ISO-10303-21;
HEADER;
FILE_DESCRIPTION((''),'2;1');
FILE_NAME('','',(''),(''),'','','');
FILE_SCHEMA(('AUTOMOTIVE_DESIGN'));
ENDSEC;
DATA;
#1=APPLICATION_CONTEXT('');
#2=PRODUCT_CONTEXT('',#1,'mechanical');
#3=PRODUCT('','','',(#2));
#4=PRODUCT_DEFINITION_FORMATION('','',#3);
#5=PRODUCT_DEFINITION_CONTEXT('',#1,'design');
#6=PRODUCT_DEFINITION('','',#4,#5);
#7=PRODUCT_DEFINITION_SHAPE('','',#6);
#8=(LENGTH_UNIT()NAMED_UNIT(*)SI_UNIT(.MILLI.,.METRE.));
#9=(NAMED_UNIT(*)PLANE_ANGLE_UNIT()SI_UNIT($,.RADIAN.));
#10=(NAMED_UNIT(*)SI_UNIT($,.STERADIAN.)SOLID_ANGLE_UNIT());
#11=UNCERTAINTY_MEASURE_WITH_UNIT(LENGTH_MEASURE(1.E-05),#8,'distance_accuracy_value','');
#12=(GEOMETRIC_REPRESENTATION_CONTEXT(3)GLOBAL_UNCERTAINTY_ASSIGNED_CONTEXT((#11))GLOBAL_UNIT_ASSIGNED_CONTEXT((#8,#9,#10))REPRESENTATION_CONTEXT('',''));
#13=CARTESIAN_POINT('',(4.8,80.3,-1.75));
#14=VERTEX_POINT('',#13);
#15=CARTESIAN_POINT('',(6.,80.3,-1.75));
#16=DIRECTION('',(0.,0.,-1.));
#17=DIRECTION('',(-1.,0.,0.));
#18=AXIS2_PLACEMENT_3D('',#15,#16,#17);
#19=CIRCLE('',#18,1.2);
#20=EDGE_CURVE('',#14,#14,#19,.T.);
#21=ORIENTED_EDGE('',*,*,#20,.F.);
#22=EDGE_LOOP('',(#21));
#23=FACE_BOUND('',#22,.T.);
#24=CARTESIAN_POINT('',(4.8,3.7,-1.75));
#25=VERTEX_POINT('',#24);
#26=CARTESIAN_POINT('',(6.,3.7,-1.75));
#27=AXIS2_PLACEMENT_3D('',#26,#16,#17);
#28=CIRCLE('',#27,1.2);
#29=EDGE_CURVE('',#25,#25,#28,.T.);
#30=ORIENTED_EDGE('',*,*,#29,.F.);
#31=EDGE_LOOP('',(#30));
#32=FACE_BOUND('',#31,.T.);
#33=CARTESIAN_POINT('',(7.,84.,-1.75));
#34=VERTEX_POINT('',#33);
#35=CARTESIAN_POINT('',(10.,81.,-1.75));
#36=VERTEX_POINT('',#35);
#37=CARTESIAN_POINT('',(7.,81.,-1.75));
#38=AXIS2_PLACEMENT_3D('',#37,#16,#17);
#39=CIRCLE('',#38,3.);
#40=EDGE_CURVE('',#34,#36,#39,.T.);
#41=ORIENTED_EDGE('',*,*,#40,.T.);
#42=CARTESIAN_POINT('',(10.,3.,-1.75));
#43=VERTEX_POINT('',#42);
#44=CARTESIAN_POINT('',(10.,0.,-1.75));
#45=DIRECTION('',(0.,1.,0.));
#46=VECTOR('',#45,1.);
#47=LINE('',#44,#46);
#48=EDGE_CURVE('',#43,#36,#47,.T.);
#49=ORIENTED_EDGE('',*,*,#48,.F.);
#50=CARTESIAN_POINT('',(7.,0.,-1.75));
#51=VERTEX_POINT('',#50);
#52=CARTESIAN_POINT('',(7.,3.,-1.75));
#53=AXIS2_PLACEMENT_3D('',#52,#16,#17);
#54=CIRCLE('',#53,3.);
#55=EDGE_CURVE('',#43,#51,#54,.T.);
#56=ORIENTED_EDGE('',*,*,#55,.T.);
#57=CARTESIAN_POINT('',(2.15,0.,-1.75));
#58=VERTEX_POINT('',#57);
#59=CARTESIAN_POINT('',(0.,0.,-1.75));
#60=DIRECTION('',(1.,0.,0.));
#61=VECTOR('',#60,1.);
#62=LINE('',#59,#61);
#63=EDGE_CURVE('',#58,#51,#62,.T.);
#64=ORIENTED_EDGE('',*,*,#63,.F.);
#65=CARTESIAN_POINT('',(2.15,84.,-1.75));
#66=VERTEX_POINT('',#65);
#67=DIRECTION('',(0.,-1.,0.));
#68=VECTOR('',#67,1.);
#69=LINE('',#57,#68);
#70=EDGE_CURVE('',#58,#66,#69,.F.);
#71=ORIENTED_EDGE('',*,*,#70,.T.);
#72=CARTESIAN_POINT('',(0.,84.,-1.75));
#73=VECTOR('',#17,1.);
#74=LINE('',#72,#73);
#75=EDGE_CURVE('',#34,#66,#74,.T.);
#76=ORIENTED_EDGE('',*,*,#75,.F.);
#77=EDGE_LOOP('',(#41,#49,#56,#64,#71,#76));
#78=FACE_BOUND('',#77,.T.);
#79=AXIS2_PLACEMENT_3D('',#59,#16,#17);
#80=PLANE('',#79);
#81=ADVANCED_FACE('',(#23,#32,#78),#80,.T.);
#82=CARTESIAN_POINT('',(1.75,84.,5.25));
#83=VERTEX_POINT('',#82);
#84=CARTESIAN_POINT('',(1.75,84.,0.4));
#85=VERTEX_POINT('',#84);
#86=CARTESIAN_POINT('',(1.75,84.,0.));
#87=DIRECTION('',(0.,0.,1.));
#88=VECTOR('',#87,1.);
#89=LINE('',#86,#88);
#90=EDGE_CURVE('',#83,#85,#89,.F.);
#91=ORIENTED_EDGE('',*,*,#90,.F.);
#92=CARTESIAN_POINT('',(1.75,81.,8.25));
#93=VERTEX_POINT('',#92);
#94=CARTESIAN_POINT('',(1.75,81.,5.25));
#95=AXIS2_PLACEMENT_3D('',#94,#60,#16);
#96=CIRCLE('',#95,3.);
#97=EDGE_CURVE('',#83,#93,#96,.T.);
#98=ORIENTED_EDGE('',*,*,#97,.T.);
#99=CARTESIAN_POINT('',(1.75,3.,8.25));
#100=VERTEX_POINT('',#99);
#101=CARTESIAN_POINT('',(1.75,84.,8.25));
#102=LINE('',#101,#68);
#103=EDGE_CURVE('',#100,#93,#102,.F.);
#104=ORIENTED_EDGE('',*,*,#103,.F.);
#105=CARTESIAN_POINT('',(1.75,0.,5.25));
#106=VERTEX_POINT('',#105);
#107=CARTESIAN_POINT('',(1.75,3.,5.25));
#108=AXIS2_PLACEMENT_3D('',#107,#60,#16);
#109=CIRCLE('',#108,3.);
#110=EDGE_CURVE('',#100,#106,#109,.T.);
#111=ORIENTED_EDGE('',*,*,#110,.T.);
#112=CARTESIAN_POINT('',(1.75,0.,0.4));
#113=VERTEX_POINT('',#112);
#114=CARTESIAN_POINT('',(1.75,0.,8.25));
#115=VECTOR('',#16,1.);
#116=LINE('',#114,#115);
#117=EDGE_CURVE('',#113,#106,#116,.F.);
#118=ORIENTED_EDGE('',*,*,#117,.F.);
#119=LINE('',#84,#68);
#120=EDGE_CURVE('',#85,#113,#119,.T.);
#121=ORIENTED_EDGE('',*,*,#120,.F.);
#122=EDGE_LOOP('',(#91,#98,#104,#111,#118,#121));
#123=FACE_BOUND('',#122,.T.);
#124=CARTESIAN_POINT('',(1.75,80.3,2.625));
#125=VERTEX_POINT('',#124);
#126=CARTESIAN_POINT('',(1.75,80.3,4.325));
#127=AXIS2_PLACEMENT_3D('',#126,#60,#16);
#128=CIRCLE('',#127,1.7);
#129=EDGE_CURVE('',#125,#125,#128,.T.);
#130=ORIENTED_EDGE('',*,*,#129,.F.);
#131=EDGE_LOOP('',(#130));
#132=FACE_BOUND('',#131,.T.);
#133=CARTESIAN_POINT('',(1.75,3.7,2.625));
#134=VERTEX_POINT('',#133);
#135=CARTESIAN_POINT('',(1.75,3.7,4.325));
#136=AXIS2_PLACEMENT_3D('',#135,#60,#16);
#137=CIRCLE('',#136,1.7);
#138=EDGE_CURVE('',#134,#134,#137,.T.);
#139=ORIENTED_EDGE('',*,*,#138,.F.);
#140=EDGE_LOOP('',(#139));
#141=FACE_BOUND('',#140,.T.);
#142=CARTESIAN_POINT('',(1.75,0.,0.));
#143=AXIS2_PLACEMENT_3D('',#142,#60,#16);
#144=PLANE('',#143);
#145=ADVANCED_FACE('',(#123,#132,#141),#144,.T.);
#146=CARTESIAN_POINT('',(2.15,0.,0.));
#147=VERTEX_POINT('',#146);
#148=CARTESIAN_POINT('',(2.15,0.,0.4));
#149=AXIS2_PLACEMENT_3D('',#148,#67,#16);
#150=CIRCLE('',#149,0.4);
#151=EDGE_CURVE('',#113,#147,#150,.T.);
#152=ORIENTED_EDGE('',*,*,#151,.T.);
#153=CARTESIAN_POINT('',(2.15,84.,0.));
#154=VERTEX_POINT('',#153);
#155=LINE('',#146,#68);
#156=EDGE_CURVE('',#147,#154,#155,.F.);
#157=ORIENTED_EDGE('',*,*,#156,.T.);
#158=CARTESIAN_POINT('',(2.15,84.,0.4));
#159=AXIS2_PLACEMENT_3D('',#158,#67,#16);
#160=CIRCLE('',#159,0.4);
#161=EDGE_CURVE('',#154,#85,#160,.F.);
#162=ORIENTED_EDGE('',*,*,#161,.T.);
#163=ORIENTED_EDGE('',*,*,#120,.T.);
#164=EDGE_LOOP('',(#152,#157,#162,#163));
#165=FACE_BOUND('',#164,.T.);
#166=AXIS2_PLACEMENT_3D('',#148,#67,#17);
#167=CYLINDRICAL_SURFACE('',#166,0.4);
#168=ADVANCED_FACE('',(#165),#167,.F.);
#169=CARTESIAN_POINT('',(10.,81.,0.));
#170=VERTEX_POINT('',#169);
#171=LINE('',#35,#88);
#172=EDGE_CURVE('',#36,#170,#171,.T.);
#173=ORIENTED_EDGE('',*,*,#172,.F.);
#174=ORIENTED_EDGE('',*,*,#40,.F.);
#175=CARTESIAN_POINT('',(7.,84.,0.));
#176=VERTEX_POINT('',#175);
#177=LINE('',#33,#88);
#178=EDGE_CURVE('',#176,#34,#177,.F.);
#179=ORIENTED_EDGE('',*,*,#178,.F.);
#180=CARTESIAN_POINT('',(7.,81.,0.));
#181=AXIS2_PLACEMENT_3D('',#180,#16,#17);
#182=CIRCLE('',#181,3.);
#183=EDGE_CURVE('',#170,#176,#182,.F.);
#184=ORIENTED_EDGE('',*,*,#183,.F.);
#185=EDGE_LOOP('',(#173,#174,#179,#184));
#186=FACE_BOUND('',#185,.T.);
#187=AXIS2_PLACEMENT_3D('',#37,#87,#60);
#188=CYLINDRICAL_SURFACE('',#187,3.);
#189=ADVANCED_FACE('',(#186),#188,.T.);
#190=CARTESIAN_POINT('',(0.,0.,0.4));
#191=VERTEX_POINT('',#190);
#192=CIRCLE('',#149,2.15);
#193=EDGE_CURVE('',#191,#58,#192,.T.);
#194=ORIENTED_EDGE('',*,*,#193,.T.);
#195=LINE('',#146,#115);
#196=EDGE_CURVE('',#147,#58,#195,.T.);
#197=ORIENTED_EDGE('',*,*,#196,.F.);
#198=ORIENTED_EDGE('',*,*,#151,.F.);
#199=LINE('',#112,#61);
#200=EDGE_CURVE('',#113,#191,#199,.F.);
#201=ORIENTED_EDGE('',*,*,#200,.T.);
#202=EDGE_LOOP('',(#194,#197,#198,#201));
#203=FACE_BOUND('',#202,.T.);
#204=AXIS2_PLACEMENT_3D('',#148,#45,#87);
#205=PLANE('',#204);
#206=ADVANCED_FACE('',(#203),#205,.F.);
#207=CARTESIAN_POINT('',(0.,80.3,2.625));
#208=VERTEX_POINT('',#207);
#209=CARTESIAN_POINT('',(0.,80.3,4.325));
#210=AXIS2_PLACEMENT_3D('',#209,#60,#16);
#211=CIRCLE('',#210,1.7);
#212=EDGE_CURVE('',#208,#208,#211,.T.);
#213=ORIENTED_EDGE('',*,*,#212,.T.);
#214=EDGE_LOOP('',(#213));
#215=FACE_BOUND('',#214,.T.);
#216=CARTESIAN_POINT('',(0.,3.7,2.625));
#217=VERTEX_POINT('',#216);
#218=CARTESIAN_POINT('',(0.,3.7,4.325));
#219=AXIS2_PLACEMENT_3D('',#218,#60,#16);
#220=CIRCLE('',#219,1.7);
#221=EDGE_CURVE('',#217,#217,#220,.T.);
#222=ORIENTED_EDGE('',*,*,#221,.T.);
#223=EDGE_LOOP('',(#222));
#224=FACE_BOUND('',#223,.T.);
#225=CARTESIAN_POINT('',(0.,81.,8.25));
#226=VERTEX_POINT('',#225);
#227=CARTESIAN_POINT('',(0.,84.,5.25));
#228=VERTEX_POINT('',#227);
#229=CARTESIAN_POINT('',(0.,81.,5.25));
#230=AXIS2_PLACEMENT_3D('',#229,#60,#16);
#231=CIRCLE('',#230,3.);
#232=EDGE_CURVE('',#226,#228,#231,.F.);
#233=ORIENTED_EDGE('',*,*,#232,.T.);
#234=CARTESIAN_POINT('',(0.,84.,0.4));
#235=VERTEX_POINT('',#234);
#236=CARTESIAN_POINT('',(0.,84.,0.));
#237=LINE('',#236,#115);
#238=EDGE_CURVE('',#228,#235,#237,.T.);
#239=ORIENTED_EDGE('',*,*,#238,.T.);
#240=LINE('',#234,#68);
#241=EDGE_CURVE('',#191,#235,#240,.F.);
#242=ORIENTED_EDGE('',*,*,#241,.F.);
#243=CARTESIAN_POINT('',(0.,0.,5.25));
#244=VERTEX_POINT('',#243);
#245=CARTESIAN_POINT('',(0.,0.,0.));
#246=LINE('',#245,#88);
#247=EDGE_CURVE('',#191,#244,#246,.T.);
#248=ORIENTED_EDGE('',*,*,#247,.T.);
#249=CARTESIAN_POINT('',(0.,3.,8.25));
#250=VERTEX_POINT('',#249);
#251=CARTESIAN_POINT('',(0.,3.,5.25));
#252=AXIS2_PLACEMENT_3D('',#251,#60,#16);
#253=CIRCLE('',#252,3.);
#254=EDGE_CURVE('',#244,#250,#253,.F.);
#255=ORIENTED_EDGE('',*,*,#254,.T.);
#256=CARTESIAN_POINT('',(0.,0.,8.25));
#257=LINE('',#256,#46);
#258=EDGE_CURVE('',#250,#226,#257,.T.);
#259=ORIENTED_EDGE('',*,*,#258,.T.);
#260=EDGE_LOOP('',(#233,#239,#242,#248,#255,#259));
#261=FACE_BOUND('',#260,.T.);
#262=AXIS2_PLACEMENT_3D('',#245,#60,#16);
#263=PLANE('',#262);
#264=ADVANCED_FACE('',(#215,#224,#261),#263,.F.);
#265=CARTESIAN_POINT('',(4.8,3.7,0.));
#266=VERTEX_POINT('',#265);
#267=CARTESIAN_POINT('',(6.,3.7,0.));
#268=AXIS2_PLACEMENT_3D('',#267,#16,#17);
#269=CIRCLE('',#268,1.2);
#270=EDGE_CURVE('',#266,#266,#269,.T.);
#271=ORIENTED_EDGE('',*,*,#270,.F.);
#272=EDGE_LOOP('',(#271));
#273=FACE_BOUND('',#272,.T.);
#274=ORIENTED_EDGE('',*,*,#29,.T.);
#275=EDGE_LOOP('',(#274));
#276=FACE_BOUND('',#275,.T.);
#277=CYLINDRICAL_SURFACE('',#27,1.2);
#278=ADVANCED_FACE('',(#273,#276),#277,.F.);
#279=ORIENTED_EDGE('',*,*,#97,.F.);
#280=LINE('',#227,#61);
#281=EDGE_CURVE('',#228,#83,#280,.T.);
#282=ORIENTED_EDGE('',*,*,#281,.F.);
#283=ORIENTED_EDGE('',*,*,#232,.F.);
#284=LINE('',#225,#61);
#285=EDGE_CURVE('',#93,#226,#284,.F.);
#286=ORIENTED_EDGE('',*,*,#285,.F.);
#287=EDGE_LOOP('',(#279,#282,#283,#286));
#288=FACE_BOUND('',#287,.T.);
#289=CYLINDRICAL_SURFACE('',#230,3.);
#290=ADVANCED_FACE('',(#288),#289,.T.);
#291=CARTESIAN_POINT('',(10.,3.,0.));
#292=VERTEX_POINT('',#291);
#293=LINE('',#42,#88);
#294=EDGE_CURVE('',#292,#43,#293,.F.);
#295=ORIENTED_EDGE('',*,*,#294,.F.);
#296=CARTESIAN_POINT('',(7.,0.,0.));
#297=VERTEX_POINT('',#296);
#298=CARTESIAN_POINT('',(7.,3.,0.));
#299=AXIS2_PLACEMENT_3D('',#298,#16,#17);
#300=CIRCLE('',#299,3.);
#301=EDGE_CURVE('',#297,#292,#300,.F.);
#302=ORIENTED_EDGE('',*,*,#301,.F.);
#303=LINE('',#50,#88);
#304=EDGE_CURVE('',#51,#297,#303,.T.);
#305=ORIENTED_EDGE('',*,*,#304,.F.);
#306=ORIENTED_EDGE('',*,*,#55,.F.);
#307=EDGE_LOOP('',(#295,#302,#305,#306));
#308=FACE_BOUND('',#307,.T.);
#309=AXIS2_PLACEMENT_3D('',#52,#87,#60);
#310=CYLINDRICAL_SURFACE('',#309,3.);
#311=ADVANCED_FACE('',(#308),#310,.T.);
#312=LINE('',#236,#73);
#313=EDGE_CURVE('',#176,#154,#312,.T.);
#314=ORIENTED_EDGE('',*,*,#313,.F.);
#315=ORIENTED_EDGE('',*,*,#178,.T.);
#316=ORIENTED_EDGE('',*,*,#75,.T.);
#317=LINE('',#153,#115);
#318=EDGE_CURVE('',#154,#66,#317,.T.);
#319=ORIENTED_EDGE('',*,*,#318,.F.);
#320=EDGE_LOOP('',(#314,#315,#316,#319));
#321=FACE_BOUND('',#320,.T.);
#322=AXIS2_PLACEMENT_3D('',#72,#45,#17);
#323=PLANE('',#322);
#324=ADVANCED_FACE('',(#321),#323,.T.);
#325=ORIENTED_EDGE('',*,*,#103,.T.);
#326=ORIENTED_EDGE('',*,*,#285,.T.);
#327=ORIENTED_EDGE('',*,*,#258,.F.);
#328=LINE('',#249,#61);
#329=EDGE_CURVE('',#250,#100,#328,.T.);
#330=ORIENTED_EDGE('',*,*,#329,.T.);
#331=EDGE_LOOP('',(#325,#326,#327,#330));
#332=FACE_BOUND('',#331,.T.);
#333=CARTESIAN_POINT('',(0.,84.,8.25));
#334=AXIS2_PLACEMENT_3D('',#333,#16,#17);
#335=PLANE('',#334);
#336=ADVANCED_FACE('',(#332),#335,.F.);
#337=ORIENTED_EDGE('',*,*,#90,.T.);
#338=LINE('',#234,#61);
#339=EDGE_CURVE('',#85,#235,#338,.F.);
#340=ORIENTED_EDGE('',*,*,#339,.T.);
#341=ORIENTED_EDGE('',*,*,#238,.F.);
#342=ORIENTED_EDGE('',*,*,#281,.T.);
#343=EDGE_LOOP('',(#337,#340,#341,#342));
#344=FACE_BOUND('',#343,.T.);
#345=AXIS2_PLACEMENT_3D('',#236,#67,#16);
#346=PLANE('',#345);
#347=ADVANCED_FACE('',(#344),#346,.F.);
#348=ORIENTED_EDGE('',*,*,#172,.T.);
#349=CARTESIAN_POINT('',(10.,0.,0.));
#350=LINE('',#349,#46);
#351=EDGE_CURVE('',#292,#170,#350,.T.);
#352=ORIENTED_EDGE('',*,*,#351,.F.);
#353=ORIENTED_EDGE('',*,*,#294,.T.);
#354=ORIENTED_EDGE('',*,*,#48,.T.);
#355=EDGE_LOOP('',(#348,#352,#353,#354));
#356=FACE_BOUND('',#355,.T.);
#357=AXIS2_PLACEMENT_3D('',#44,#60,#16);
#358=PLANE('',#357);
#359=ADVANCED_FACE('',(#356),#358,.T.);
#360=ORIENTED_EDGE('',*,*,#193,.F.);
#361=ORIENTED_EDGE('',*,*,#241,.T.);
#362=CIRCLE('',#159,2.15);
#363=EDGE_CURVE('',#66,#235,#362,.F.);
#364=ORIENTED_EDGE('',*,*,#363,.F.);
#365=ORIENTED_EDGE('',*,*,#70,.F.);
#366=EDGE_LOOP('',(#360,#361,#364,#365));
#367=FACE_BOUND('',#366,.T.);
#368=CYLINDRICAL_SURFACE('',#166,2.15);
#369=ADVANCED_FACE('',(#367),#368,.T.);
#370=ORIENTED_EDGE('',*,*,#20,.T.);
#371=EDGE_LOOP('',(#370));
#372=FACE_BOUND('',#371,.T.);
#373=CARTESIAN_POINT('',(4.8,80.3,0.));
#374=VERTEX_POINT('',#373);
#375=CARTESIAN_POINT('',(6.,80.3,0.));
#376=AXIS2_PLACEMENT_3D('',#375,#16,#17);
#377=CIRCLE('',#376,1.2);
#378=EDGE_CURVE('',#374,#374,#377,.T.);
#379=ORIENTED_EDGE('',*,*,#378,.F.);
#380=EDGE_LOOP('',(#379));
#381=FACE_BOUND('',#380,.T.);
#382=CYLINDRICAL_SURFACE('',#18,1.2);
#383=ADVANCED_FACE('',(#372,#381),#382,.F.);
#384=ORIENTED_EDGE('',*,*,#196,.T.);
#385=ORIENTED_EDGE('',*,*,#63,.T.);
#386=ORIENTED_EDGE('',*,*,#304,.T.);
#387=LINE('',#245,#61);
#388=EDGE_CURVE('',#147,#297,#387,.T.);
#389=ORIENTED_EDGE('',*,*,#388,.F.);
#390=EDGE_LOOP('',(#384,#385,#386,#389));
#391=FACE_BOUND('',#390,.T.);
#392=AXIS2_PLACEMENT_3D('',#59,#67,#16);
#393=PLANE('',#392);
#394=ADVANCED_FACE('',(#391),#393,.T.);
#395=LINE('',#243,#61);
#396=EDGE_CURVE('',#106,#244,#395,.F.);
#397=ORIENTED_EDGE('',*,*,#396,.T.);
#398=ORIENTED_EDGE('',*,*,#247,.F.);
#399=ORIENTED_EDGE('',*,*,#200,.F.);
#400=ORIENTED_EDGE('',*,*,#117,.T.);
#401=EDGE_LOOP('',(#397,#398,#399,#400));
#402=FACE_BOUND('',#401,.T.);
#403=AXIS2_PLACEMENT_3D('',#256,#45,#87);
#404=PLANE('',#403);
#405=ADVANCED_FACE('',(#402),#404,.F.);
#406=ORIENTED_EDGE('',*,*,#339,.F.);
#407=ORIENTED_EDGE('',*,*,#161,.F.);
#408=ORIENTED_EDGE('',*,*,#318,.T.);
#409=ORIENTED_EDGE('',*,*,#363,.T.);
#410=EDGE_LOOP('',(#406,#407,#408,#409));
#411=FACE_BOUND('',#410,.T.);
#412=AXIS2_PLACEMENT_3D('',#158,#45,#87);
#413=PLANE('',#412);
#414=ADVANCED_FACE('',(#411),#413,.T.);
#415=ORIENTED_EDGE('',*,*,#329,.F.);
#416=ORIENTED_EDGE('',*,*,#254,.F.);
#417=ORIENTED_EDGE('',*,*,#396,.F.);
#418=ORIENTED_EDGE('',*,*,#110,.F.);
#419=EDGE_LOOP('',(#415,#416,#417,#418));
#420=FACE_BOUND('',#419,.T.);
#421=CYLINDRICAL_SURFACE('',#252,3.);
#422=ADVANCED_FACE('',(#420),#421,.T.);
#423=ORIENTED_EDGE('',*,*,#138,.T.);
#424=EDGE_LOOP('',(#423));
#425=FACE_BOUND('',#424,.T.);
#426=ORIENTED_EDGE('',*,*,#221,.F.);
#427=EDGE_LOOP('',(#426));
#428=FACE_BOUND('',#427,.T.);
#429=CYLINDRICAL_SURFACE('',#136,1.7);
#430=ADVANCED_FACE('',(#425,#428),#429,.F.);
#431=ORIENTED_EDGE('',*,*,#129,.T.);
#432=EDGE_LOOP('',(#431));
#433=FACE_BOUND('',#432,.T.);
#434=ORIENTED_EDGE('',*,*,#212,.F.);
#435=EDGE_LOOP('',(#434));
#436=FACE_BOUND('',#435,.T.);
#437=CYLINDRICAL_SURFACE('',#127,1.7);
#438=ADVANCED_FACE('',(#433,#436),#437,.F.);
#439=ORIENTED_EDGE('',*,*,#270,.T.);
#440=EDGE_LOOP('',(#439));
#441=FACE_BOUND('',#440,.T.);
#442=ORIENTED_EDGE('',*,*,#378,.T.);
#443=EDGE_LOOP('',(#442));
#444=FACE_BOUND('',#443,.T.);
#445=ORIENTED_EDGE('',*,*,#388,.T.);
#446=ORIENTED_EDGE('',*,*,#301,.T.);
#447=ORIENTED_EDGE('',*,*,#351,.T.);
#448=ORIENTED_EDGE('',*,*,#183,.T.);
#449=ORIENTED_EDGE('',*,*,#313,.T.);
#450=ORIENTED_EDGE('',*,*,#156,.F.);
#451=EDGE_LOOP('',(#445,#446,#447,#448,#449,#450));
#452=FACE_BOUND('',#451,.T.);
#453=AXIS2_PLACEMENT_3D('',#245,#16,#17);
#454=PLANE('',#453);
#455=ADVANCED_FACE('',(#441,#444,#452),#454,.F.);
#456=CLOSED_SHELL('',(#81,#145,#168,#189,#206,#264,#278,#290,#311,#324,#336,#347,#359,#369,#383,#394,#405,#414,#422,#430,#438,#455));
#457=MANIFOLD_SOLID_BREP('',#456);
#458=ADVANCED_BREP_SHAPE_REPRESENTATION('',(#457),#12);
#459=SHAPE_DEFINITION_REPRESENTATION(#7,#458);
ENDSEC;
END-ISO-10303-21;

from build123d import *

# Parameters (mm, degrees)
SKETCH1_W                    = 10
SKETCH1_H                    = 84
BASE_FLANGE1_DEPTH           = 1.75
EDGE_FLANGE1_STRIP_W         = 7.8
EDGE_FLANGE1_STRIP_H         = 1.75
EDGE_FLANGE1_STRIP_CUT_DEPTH = 84
EDGE_FLANGE1_DEPTH           = 84
SSD_MOUNTING_HOLES_D         = 2.4
SPINE_MOUNTING_HOLES_D       = 3.4
FILLET1_R                    = 3


# Sheet-metal steps are written as plain solids
with BuildPart() as part:
    # Sketch1 → Base-Flange1 (new body)
    with BuildSketch(Plane.XY):
        with Locations((5, 42)):
            Rectangle(SKETCH1_W, SKETCH1_H)
    extrude(amount=-BASE_FLANGE1_DEPTH)

    # Edge-Flange1 strip (across the edge) → Edge-Flange1 strip cut (cut)
    with BuildSketch(Plane.XZ.offset(-84)):
        with Locations((-1.75, -0.875)):
            Rectangle(EDGE_FLANGE1_STRIP_W, EDGE_FLANGE1_STRIP_H)
    extrude(amount=EDGE_FLANGE1_STRIP_CUT_DEPTH, mode=Mode.SUBTRACT)

    # Edge-Flange1 section (across the edge) → Edge-Flange1 (add)
    with BuildSketch(Plane.XZ.offset(-84)):
        with BuildLine():
            Line((0, 0.4), (0, 8.25))
            Line((0, 8.25), (1.75, 8.25))
            Line((1.75, 8.25), (1.75, 0.4))
            ThreePointArc((1.75, 0.4), (1.867157288, 0.117157288), (2.15, 0))
            Line((2.15, 0), (2.15, -1.75))
            ThreePointArc((2.15, -1.75), (0.62972042, -1.12027958), (0, 0.4))
        make_face()
    extrude(amount=EDGE_FLANGE1_DEPTH)

    # ssd-mounting-holes (through all)
    with Locations(Plane(origin=(6, 80.3, -1.75), x_dir=(-1, 0, 0), z_dir=(0, 0, -1))):
        with Locations((0, 0), (0, -76.6)):
            Hole(SSD_MOUNTING_HOLES_D / 2)

    # spine-mounting-holes (through all)
    with Locations(Plane(origin=(1.75, 0, 0), x_dir=(0, 0, -1), z_dir=(1, 0, 0))):
        with Locations((-4.325, 80.3), (-4.325, 3.7)):
            Hole(SPINE_MOUNTING_HOLES_D / 2)

    # Fillet1
    fillet1_edges = [part.edges().sort_by_distance(p)[0] for p in [
        (0.875, 84, 8.25),
        (0.875, 0, 8.25),
        (10, 84, -0.875),
        (10, 0, -0.875),
    ]]
    fillet(fillet1_edges, radius=FILLET1_R)


solid = part.part
